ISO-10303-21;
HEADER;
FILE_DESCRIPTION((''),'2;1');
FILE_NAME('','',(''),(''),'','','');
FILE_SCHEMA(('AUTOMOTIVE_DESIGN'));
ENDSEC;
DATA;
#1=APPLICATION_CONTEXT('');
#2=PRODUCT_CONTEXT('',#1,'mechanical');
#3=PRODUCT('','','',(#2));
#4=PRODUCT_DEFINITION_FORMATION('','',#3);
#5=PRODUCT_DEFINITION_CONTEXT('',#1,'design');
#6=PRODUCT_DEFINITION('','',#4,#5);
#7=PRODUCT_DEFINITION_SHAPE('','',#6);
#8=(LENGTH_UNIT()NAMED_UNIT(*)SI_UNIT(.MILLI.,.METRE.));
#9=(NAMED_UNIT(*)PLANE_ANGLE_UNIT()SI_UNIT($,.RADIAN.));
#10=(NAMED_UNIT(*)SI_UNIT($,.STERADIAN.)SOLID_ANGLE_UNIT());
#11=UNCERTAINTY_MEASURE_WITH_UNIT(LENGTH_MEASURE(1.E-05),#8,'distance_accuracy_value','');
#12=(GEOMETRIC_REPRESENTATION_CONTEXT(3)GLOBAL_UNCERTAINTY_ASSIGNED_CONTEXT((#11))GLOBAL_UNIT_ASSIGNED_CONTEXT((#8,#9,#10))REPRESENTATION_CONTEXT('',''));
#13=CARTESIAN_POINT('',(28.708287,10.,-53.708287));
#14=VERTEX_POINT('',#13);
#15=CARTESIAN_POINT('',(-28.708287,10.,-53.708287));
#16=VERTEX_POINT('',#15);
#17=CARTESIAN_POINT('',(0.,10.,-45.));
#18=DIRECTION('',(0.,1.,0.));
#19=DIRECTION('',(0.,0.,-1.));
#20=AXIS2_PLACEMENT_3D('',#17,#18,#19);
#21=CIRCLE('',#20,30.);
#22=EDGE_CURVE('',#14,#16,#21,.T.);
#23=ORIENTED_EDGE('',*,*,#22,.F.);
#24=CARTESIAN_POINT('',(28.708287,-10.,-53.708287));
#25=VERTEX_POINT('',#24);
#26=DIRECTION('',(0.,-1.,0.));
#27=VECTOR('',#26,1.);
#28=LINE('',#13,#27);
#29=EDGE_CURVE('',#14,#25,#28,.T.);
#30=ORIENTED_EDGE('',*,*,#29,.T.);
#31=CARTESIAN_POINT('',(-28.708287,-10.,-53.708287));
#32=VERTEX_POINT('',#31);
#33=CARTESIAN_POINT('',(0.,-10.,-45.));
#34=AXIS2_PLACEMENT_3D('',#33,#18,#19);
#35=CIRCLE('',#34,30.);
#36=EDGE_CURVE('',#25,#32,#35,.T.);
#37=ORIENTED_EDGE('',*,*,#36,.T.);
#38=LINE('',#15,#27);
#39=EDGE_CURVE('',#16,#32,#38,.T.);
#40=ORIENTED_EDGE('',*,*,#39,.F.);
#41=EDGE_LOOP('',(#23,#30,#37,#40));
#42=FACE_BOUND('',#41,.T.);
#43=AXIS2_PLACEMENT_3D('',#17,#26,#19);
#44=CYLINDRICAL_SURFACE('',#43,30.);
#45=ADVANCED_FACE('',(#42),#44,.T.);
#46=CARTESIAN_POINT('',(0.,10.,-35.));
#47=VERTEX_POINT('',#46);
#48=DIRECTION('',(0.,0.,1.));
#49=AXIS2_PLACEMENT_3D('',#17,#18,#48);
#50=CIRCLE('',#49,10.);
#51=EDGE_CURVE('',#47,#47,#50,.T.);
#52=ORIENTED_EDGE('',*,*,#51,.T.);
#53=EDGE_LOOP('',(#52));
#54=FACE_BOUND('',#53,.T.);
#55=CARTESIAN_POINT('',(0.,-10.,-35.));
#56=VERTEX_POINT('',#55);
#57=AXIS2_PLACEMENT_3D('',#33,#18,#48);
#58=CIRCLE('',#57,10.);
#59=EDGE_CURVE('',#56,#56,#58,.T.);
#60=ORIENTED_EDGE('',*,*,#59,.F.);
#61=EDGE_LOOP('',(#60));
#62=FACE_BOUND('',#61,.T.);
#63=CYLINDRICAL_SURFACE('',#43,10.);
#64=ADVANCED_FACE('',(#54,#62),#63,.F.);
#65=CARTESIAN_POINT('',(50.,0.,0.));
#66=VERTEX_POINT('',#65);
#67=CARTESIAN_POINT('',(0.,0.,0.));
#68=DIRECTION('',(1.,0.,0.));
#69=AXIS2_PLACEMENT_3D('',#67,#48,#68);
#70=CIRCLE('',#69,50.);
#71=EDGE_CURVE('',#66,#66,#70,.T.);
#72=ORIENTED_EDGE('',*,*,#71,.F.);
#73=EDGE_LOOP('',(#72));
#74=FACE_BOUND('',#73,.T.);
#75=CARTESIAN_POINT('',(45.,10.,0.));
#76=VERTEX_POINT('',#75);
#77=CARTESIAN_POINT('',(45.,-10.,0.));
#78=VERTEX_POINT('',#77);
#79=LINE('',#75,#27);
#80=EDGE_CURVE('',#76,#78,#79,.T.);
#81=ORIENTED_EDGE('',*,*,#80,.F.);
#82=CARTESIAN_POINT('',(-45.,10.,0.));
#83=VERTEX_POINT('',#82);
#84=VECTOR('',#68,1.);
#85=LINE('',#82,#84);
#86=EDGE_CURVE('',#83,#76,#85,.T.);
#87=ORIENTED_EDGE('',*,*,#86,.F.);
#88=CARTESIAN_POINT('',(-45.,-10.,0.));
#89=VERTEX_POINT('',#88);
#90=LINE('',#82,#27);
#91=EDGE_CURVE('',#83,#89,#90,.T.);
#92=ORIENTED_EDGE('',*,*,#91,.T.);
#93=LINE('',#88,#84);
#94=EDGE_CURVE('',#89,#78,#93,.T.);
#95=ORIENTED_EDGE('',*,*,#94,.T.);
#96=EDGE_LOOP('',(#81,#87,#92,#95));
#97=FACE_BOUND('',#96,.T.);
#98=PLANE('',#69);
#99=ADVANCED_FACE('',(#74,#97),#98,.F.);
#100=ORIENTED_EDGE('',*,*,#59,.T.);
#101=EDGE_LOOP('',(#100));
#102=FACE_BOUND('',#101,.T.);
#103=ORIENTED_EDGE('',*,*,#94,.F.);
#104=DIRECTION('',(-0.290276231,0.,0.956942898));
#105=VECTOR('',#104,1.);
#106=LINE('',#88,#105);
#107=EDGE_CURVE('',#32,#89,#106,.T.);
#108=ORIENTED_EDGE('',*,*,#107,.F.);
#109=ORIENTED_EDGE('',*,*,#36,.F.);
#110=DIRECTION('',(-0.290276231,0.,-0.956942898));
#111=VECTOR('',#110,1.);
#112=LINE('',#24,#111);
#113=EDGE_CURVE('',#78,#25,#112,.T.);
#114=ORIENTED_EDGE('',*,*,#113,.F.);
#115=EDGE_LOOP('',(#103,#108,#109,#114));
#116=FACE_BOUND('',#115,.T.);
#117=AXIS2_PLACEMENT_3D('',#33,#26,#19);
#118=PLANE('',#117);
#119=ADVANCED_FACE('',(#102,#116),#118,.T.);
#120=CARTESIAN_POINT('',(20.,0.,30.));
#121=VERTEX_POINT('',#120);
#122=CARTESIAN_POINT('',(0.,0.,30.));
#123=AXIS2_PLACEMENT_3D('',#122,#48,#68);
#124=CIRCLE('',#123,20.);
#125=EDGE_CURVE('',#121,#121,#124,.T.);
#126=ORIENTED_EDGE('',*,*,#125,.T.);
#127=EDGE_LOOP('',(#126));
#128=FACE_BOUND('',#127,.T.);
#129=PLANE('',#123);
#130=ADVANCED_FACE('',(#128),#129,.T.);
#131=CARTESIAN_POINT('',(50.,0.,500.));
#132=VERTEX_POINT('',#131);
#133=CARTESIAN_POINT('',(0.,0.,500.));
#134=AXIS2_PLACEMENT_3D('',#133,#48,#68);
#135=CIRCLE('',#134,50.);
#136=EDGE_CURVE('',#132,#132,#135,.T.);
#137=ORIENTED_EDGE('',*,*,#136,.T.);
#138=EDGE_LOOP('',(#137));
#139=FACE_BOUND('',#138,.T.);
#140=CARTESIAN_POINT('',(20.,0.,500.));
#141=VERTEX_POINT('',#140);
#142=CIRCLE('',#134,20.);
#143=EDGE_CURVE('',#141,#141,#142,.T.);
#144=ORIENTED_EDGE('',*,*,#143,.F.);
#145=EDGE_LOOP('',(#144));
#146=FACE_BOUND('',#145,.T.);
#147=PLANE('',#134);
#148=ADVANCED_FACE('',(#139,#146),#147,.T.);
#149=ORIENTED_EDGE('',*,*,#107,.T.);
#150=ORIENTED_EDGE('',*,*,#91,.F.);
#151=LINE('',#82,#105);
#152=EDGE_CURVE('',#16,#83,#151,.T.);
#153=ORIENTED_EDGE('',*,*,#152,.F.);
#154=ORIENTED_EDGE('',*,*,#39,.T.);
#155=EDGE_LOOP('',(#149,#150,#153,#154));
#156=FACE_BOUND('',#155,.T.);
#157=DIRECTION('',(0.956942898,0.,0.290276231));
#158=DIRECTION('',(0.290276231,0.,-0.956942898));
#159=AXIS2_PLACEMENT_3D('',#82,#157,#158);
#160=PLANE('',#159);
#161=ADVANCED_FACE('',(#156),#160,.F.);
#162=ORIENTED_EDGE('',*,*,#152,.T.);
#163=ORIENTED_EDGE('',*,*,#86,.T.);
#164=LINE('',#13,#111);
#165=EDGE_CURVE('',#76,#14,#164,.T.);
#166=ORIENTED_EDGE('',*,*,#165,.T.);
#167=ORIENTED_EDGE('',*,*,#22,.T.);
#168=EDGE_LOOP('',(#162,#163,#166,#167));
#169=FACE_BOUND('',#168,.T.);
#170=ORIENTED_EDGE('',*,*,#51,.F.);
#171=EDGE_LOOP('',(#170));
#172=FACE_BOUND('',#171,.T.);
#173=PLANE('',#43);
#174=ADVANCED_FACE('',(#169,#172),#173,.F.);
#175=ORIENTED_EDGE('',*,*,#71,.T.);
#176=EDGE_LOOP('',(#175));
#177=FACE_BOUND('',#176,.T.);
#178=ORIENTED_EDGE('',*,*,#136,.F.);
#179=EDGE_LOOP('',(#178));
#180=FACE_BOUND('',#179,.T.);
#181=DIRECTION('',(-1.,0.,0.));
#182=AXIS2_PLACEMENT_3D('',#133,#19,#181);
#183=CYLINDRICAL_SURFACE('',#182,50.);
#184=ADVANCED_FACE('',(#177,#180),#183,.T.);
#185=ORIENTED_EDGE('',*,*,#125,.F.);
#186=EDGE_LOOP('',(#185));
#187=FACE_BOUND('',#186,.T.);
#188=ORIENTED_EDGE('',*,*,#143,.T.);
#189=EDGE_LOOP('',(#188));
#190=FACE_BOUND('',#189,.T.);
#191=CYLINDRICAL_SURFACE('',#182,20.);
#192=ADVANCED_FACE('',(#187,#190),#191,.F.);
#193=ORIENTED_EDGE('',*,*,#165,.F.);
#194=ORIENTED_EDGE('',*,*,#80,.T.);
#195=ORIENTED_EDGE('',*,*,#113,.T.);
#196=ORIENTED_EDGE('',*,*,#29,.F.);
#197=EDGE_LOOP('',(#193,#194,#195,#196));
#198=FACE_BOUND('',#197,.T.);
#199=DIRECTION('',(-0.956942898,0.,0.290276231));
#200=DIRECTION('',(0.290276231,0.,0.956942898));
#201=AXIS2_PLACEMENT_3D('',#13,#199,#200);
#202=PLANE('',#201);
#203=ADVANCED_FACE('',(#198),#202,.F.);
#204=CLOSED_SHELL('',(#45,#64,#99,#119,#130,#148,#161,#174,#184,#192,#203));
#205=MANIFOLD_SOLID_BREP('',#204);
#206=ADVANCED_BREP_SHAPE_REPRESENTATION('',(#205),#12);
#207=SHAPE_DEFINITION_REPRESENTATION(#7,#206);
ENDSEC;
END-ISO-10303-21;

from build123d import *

# Parameters (mm, degrees)
SKETCH1_R           = 50
BOSS_EXTRUDE1_DEPTH = 500
SKETCH2_R           = 10
BOSS_EXTRUDE2_DEPTH = 10
SHELL1_START        = 30
SHELL1_OUTLINE_R    = 20
SHELL1_DEPTH        = 470


# Read off the part's stored shape, not the designer's step: Shell1
with BuildPart() as part:
    # Sketch1 → Boss-Extrude1 (new body)
    with BuildSketch(Plane.XY):
        Circle(SKETCH1_R)
    extrude(amount=BOSS_EXTRUDE1_DEPTH)

    # Sketch2 → Boss-Extrude2 (add, symmetric)
    with BuildSketch(Plane(origin=(0, 0, 0), x_dir=(1, 0, 0), z_dir=(0, 1, 0))):
        with BuildLine():
            Line((-45, 0), (-28.708286934, 53.708286934))
            ThreePointArc((-28.708286934, 53.708286934), (0, 75), (28.708286934, 53.708286934))
            Line((28.708286934, 53.708286934), (45, 0))
            Line((45, 0), (-45, 0))
        make_face()
        with Locations(Location((0, 45, 0), (0, 0, 270))):
            Circle(SKETCH2_R, mode=Mode.SUBTRACT)
    extrude(amount=BOSS_EXTRUDE2_DEPTH, both=True)

    # Shell1 outline → Shell1 (cut)
    with BuildSketch(Plane.XY.offset(SHELL1_START)):
        Circle(SHELL1_OUTLINE_R)
    extrude(amount=SHELL1_DEPTH, mode=Mode.SUBTRACT)


solid = part.part
